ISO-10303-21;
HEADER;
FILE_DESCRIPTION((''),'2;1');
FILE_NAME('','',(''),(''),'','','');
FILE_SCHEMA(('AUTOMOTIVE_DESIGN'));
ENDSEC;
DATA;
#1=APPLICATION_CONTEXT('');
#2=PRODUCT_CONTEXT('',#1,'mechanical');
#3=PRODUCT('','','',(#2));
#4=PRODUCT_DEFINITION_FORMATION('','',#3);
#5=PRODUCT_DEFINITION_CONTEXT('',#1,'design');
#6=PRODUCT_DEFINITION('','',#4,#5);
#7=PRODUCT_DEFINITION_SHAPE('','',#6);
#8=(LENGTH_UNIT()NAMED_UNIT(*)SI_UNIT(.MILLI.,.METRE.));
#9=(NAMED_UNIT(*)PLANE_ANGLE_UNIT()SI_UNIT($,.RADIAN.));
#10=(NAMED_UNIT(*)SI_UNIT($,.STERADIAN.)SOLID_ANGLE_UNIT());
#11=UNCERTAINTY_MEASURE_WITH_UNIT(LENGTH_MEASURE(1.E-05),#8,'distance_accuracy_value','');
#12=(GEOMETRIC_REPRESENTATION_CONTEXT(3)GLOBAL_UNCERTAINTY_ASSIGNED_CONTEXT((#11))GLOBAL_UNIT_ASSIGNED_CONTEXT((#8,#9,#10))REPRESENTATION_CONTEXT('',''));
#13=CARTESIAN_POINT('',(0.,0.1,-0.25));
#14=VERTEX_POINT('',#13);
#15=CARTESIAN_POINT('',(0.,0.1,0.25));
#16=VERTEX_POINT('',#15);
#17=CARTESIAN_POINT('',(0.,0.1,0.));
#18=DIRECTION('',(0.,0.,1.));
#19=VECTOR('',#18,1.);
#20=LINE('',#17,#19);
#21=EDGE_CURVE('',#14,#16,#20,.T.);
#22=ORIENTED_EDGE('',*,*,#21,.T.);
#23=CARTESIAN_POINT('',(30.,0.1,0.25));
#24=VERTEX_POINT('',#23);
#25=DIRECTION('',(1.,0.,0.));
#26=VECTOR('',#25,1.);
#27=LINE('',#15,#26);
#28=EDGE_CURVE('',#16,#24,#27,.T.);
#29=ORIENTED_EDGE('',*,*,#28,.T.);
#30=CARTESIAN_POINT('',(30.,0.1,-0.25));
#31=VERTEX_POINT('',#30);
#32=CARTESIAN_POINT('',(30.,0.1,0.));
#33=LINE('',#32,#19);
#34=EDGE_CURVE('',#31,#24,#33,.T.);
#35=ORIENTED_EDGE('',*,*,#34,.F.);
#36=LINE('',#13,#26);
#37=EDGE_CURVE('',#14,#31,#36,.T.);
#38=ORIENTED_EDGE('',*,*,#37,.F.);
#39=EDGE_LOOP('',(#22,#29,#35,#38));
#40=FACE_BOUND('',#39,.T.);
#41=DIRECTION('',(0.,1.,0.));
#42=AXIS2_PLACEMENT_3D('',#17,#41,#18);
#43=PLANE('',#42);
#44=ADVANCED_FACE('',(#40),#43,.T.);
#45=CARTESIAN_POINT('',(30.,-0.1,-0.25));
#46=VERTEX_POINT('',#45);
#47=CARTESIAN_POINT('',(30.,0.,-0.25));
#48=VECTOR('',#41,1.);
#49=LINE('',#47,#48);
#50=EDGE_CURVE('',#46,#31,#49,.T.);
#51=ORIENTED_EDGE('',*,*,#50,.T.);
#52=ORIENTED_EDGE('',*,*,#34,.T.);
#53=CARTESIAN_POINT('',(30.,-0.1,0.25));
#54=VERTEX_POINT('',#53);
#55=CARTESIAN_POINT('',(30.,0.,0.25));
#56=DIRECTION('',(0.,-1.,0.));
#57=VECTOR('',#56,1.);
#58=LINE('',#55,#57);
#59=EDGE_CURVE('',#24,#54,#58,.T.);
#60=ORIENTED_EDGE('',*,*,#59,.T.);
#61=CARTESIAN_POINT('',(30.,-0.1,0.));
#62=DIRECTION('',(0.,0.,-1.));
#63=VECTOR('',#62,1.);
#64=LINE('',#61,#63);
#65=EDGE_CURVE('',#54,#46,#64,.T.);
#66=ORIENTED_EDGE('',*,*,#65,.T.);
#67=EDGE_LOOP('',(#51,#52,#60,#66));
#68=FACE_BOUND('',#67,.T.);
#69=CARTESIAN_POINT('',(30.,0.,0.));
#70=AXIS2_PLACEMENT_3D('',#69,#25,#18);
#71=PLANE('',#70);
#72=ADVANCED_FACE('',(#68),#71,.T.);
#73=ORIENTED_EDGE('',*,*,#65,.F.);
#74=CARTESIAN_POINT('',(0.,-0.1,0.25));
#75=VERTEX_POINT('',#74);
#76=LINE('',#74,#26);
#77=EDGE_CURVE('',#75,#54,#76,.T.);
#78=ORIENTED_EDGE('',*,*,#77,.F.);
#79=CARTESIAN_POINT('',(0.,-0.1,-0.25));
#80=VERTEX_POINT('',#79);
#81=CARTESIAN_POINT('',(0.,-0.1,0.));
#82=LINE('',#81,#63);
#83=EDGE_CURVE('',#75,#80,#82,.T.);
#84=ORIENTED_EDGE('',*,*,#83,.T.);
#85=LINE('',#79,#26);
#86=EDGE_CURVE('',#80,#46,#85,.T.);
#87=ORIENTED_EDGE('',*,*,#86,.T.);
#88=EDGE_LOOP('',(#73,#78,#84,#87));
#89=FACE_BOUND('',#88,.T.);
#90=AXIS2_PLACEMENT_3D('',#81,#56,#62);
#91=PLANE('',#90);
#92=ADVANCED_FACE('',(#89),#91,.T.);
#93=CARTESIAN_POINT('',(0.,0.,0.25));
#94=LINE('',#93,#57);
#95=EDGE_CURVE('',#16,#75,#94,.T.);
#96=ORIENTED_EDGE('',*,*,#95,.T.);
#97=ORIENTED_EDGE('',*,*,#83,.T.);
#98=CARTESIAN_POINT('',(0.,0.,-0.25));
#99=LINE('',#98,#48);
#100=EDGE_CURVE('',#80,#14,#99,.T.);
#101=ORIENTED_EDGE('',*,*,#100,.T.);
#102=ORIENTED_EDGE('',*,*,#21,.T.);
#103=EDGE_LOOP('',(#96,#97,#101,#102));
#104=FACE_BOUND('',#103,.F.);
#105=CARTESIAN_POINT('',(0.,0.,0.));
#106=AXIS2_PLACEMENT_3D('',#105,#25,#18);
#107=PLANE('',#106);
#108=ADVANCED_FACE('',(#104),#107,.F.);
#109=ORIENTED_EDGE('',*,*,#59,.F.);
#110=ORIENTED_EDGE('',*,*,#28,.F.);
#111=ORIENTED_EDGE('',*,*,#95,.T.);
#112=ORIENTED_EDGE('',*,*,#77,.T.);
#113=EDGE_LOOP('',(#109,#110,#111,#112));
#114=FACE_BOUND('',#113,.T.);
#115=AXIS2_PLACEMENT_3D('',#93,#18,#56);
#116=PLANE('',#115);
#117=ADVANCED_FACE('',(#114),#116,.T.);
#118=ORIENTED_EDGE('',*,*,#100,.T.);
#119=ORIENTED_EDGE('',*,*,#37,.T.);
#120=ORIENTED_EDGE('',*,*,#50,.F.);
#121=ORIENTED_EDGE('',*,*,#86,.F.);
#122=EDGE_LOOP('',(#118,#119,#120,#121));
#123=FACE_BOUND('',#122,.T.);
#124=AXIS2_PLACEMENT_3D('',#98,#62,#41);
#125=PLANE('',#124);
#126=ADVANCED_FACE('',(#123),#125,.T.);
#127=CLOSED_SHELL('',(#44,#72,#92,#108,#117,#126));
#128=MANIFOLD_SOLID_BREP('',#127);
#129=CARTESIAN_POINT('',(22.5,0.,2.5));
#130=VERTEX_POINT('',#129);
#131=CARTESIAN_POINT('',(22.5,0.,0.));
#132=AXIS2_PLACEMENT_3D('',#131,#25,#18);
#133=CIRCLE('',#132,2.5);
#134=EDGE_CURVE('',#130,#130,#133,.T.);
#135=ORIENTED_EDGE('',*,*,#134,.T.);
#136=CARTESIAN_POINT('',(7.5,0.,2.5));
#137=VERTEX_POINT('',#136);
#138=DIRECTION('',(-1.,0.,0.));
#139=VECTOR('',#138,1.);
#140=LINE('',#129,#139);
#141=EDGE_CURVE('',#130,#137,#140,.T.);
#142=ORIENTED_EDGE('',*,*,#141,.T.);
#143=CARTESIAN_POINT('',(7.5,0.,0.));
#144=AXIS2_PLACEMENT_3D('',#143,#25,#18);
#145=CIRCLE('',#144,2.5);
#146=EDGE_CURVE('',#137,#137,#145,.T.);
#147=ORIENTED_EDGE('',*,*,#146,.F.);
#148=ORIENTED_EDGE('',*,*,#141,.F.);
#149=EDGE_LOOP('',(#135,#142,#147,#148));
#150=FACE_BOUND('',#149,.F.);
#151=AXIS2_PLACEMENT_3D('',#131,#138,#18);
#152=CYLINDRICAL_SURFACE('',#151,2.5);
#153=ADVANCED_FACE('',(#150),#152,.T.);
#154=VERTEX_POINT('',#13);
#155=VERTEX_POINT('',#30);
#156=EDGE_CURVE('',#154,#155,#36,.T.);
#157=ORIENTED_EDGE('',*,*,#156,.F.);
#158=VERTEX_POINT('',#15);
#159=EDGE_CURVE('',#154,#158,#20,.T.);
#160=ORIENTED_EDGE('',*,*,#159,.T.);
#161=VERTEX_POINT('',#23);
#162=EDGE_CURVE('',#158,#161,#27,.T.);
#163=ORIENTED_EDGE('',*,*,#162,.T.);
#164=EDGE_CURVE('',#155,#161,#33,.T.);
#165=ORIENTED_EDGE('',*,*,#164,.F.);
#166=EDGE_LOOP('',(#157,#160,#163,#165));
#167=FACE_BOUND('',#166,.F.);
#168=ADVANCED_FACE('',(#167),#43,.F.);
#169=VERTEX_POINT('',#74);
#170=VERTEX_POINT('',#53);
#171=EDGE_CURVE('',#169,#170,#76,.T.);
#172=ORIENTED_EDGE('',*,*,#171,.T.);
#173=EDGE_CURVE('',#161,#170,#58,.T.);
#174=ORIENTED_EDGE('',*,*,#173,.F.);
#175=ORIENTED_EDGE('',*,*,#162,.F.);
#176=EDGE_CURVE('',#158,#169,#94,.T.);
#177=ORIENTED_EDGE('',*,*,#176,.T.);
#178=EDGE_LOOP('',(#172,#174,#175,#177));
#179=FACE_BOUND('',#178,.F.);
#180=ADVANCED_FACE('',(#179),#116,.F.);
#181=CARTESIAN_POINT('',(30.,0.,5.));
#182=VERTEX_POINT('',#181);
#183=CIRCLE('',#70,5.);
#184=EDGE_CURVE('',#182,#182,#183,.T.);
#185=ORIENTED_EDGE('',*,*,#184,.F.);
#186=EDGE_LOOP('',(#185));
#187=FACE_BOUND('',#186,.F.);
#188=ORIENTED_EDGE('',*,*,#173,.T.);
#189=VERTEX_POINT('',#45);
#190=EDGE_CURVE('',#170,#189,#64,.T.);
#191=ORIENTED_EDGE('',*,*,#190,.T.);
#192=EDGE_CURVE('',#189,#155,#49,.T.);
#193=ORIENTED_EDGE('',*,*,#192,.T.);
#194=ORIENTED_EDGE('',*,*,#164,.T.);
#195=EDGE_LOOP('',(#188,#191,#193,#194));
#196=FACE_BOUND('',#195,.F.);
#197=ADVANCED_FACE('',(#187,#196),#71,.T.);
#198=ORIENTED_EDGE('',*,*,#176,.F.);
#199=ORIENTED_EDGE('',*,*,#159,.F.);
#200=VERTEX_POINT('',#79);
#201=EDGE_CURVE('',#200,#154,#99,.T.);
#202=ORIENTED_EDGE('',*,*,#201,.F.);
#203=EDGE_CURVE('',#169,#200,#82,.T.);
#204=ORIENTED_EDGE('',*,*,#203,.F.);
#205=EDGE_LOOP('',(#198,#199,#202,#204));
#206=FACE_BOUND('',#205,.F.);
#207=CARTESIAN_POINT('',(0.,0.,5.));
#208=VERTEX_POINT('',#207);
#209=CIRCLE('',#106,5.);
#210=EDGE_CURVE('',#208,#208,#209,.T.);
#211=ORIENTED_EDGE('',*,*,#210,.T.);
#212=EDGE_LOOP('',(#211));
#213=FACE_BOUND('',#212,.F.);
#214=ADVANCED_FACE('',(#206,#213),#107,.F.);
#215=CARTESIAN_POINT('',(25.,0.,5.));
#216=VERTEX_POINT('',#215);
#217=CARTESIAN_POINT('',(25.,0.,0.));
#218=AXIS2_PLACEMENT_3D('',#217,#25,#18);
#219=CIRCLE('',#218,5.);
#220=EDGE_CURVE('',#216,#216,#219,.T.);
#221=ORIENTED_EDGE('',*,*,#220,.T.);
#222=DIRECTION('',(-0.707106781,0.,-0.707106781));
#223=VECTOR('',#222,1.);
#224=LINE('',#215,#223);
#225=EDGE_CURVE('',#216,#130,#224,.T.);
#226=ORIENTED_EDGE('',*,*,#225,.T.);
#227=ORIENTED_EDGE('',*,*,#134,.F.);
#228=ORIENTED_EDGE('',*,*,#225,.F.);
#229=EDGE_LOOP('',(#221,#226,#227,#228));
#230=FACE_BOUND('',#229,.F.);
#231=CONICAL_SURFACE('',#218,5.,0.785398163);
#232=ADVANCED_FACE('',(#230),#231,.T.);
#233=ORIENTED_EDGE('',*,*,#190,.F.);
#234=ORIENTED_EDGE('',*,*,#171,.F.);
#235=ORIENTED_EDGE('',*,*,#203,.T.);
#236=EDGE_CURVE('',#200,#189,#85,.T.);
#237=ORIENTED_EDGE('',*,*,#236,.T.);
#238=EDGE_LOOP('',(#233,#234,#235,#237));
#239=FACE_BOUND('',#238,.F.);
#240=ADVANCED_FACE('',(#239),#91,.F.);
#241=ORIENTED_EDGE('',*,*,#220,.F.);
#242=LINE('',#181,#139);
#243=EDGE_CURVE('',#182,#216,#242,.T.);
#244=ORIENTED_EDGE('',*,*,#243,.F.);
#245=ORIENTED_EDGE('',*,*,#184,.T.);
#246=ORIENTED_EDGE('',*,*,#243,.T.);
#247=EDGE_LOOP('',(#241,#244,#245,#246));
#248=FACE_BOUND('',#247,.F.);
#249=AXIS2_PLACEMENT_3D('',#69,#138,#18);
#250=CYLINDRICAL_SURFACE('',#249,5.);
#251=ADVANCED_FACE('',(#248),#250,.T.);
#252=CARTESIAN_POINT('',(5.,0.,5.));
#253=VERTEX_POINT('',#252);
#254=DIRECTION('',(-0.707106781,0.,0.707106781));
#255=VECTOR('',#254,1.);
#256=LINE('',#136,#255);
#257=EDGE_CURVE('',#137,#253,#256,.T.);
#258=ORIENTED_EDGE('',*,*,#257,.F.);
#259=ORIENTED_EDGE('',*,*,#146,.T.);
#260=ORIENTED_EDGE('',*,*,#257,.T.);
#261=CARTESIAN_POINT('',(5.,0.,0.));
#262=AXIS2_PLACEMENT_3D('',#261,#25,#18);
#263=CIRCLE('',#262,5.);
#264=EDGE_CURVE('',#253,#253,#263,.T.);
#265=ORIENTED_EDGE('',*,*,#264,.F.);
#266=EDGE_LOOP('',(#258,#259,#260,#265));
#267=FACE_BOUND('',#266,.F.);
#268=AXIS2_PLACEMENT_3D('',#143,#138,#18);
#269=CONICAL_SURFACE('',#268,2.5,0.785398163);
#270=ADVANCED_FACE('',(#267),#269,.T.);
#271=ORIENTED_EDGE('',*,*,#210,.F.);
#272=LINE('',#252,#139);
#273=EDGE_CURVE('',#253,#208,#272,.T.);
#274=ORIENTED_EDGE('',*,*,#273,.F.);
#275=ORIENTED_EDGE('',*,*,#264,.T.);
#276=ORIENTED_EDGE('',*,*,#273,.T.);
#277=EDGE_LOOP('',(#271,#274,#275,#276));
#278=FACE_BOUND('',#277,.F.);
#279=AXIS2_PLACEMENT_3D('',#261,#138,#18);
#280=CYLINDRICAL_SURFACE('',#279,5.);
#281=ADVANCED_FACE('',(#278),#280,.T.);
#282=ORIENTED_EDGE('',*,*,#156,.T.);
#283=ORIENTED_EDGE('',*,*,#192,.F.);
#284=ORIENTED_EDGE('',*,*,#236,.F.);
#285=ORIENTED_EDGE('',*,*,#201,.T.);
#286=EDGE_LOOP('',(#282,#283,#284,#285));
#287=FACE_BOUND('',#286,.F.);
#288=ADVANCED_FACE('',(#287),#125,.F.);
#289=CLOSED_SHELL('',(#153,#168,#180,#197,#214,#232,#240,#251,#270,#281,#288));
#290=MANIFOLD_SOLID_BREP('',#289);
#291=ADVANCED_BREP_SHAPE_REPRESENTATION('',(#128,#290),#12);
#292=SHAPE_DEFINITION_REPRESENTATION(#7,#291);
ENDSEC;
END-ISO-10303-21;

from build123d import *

# Parameters (mm, degrees)
F3_W = 0.2
F3_H = 0.5


with BuildPart() as f1:
    # F0 (on Front) → F1 (revolve)
    with BuildSketch(Plane.XZ):
        Polygon((0, 5), (0, 0), (30, 0), (30, 5), (25, 5), (22.5, 2.5), (7.5, 2.5), (5, 5), align=None)
    revolve(axis=Axis((15, 0, 0), (1, 0, 0)))

    # F5: sweep along a path in F2
    with BuildLine(Plane.XZ) as f5_path:
        Line((0, 0), (30, 0))
    # F3 (on face) → F5 (sweep, cut)
    with BuildSketch(Plane.YZ.offset(30)):
        Rectangle(F3_W, F3_H)
    sweep(path=f5_path.line, mode=Mode.SUBTRACT)


with BuildPart() as f4:
    # F4: sweep along a path in F2
    with BuildLine(Plane.XZ) as f4_path:
        Line((0, 0), (30, 0))
    # F3 (on face) → F4 (sweep)
    with BuildSketch(Plane.YZ.offset(30)):
        Rectangle(F3_W, F3_H)
    sweep(path=f4_path.line)


solid = Compound([f1.part, f4.part])
